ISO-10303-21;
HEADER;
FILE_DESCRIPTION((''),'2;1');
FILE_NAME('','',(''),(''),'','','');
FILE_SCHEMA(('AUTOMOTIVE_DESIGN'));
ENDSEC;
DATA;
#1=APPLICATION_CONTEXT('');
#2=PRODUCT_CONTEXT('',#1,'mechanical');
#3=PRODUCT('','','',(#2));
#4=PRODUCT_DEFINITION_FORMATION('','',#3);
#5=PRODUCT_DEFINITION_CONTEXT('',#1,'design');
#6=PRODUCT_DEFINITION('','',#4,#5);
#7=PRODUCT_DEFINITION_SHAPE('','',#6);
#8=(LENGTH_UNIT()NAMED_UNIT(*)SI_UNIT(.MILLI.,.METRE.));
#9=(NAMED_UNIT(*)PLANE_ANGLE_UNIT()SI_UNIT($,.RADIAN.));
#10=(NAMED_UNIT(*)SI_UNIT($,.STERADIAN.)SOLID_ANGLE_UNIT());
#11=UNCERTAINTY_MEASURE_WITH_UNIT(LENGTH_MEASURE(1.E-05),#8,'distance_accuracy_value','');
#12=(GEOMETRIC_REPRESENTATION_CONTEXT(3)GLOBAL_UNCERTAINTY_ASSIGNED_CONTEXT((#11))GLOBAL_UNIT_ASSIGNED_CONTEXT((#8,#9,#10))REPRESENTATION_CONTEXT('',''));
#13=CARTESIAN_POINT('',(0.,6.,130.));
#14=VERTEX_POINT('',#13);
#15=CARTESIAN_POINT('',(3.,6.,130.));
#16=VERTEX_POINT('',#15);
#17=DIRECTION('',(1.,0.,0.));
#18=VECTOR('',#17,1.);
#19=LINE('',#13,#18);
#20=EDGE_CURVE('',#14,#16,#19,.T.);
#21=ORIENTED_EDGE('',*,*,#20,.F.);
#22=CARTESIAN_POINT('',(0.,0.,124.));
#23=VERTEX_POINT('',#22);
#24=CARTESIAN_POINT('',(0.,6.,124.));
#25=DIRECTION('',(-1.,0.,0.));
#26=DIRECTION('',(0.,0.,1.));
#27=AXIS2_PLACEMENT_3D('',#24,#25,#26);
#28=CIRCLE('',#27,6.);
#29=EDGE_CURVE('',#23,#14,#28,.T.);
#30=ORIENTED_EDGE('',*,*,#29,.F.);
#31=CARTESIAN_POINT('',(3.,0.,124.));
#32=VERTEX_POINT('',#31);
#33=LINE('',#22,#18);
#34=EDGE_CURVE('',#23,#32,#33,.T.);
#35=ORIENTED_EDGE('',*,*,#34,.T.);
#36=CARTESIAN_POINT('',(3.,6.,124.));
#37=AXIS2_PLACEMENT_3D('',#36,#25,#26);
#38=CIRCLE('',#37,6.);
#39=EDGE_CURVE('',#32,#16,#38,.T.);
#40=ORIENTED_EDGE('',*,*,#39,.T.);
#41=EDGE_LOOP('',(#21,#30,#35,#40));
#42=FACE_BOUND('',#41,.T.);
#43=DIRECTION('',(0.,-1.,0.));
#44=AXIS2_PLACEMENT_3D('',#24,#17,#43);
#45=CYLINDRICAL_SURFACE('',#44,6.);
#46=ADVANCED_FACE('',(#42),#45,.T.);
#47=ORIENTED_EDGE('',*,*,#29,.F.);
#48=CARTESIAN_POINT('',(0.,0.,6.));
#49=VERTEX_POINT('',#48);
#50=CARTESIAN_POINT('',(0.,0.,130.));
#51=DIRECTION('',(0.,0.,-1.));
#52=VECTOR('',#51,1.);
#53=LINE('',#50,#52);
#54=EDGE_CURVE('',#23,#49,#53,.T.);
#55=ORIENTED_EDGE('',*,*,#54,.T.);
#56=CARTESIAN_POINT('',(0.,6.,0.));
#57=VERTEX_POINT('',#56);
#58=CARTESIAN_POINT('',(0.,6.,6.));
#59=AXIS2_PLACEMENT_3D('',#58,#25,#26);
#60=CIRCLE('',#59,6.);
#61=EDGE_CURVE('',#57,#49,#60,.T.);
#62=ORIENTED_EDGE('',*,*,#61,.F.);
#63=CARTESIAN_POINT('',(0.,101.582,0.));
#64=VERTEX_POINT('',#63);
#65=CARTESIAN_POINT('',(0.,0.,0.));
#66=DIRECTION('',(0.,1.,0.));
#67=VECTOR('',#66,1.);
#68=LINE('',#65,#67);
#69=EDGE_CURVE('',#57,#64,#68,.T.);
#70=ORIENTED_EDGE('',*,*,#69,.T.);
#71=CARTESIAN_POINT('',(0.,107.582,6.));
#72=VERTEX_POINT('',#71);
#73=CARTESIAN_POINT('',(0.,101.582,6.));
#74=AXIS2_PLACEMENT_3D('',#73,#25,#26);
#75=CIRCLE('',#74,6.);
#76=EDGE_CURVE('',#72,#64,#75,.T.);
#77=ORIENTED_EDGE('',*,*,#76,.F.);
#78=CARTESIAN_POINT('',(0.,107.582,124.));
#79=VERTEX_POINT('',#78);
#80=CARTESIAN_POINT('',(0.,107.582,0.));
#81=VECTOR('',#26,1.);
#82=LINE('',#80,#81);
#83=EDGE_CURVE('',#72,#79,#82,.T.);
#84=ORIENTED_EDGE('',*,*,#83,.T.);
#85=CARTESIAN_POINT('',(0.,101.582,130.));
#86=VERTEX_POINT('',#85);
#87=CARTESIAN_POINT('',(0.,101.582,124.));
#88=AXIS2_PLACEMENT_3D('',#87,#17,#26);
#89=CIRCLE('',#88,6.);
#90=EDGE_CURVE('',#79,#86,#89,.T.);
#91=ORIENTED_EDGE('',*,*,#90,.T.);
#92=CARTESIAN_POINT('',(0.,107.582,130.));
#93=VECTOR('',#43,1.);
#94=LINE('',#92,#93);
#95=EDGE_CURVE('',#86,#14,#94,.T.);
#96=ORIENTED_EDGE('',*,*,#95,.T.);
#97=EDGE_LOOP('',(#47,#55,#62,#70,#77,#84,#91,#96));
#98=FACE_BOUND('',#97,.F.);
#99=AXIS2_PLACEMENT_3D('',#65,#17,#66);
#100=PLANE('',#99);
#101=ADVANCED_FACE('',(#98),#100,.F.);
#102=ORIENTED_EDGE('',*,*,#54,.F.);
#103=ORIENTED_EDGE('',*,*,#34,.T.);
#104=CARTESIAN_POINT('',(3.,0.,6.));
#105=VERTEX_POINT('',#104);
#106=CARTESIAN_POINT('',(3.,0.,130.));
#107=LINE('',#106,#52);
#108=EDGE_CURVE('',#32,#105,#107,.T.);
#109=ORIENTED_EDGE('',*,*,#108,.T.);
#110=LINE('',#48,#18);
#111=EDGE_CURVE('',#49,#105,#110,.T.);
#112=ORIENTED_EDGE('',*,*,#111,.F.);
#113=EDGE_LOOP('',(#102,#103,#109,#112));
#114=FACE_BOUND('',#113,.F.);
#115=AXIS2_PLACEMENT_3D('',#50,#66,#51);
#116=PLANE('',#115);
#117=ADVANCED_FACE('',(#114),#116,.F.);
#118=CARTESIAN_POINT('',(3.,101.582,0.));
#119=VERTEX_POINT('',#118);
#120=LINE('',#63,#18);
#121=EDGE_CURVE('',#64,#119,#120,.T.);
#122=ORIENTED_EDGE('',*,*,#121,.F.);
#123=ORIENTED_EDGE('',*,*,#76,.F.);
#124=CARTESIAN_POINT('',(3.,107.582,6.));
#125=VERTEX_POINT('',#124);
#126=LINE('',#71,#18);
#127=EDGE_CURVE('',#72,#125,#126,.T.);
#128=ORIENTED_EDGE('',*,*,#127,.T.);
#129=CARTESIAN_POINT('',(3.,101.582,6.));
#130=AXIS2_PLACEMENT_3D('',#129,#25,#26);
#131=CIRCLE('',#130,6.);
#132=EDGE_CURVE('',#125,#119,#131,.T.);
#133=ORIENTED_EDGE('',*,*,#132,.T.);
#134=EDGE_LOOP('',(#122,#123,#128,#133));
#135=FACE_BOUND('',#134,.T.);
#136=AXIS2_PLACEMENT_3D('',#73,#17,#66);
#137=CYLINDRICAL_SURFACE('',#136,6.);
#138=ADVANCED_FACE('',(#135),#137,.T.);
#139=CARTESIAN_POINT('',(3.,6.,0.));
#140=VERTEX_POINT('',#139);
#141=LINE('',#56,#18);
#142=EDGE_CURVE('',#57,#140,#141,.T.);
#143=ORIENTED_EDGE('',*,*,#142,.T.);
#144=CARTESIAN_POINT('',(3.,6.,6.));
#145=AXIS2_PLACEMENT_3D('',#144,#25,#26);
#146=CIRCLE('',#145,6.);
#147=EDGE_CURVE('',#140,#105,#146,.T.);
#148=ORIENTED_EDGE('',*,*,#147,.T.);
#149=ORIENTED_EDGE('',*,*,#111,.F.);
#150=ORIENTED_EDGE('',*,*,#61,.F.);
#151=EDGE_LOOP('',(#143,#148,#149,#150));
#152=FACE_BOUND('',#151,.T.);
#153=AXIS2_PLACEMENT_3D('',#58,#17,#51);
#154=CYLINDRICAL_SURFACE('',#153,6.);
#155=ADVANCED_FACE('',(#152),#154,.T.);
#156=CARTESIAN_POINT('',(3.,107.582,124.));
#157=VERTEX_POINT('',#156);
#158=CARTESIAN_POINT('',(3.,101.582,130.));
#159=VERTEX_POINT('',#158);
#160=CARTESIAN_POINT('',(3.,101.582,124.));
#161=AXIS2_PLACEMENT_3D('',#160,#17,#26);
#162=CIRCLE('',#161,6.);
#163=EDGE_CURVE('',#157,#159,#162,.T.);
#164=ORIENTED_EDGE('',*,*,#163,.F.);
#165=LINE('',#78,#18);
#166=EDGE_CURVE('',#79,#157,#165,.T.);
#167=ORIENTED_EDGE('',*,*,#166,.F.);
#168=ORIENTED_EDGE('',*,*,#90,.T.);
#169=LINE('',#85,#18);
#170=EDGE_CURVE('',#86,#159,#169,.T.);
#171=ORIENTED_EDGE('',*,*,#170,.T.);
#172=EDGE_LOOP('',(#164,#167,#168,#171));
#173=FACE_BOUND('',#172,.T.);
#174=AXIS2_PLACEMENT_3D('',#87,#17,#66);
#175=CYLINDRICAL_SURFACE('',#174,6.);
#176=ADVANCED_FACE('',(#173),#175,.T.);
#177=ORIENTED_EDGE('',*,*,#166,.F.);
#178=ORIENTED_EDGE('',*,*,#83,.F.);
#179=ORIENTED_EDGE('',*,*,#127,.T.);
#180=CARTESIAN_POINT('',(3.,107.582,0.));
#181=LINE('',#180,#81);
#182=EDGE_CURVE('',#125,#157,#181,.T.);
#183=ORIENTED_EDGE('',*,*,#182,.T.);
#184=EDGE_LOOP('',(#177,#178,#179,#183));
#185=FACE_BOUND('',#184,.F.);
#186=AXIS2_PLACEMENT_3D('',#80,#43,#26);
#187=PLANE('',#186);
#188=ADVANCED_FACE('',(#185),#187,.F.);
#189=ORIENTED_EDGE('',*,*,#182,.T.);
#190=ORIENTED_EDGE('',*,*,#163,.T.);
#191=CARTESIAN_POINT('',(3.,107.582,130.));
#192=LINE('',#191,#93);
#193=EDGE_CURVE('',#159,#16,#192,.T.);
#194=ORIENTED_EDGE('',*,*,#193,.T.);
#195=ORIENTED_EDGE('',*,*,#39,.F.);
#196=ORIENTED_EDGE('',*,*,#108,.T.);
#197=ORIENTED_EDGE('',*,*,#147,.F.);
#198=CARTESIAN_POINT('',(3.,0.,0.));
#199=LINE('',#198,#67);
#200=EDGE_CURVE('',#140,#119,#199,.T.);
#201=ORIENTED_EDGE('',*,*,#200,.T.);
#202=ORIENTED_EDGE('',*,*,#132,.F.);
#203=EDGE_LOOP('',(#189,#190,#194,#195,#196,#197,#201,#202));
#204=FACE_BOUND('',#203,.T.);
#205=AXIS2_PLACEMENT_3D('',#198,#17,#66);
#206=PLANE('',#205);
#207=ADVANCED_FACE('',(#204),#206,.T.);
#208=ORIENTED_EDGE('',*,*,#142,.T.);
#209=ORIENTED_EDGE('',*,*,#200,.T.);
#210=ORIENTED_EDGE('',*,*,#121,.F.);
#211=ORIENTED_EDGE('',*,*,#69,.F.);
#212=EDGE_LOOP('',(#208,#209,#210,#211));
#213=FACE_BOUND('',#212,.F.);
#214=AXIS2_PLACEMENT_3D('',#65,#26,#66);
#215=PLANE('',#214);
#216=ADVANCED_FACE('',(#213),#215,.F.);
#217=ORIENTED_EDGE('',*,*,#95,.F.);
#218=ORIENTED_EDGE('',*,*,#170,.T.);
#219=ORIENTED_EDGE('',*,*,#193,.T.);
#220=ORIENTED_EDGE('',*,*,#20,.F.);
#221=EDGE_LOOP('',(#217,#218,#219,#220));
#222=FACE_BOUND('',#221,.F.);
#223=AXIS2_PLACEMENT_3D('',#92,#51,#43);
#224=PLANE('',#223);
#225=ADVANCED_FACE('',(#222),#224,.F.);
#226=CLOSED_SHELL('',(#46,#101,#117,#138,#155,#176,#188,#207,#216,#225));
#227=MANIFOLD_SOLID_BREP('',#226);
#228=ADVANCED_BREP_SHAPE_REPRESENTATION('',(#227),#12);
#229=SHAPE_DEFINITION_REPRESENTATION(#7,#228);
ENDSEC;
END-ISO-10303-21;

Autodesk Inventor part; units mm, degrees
ref_plane "YZ Plane" through (0, 0, 0) normal (1, 0, 0) x (0, 1, 0)
ref_plane "XZ Plane" through (0, 0, 0) normal (0, 1, 0) x (-1, 0, 0)
ref_plane "XY Plane" through (0, 0, 0) normal (0, 0, 1) x (1, 0, 0)
sketch "Sketch1" plane through (0, 0, 0) normal (1, 0, 0) x (0, 1, 0)
  line L0 (107.582, 130) -> (0, 130)
  line L1 (0, 130) -> (0, 0)
  line L2 (0, 0) -> (107.582, 0)
  line L3 (107.582, 0) -> (107.582, 130)
  dimension "d0" = 130
  dimension "d1" = 107.582
extrude "Plate1" add sketch "Sketch1" along normal blind 3
fillet "Corner Round1" radius 6 4 edges at (1.5, 107.582, 130) (1.5, 107.582, 0) (1.5, 0, 130) (1.5, 0, 0)
equation "\"d2\" = Thickness"
equation "\"BendReliefWidth\" = Thickness"
equation "\"BendReliefDepth\" = 0.5 * Thickness"
equation "\"CornerReliefSize\" = 4 * Thickness"
equation "\"MinimumRemnant\" = 2 * Thickness"
equation "\"TransitionRadius\" = BendRadius"
equation "\"JacobiRadiusSize\" = BendRadius"
equation "\"GapSize\" = Thickness"
equation "\"Thickness\" = 3"
equation "\"BendRadius\" = 5"
properties part number "MSC 802 bottom plate gills" material "Stainless Steel"
